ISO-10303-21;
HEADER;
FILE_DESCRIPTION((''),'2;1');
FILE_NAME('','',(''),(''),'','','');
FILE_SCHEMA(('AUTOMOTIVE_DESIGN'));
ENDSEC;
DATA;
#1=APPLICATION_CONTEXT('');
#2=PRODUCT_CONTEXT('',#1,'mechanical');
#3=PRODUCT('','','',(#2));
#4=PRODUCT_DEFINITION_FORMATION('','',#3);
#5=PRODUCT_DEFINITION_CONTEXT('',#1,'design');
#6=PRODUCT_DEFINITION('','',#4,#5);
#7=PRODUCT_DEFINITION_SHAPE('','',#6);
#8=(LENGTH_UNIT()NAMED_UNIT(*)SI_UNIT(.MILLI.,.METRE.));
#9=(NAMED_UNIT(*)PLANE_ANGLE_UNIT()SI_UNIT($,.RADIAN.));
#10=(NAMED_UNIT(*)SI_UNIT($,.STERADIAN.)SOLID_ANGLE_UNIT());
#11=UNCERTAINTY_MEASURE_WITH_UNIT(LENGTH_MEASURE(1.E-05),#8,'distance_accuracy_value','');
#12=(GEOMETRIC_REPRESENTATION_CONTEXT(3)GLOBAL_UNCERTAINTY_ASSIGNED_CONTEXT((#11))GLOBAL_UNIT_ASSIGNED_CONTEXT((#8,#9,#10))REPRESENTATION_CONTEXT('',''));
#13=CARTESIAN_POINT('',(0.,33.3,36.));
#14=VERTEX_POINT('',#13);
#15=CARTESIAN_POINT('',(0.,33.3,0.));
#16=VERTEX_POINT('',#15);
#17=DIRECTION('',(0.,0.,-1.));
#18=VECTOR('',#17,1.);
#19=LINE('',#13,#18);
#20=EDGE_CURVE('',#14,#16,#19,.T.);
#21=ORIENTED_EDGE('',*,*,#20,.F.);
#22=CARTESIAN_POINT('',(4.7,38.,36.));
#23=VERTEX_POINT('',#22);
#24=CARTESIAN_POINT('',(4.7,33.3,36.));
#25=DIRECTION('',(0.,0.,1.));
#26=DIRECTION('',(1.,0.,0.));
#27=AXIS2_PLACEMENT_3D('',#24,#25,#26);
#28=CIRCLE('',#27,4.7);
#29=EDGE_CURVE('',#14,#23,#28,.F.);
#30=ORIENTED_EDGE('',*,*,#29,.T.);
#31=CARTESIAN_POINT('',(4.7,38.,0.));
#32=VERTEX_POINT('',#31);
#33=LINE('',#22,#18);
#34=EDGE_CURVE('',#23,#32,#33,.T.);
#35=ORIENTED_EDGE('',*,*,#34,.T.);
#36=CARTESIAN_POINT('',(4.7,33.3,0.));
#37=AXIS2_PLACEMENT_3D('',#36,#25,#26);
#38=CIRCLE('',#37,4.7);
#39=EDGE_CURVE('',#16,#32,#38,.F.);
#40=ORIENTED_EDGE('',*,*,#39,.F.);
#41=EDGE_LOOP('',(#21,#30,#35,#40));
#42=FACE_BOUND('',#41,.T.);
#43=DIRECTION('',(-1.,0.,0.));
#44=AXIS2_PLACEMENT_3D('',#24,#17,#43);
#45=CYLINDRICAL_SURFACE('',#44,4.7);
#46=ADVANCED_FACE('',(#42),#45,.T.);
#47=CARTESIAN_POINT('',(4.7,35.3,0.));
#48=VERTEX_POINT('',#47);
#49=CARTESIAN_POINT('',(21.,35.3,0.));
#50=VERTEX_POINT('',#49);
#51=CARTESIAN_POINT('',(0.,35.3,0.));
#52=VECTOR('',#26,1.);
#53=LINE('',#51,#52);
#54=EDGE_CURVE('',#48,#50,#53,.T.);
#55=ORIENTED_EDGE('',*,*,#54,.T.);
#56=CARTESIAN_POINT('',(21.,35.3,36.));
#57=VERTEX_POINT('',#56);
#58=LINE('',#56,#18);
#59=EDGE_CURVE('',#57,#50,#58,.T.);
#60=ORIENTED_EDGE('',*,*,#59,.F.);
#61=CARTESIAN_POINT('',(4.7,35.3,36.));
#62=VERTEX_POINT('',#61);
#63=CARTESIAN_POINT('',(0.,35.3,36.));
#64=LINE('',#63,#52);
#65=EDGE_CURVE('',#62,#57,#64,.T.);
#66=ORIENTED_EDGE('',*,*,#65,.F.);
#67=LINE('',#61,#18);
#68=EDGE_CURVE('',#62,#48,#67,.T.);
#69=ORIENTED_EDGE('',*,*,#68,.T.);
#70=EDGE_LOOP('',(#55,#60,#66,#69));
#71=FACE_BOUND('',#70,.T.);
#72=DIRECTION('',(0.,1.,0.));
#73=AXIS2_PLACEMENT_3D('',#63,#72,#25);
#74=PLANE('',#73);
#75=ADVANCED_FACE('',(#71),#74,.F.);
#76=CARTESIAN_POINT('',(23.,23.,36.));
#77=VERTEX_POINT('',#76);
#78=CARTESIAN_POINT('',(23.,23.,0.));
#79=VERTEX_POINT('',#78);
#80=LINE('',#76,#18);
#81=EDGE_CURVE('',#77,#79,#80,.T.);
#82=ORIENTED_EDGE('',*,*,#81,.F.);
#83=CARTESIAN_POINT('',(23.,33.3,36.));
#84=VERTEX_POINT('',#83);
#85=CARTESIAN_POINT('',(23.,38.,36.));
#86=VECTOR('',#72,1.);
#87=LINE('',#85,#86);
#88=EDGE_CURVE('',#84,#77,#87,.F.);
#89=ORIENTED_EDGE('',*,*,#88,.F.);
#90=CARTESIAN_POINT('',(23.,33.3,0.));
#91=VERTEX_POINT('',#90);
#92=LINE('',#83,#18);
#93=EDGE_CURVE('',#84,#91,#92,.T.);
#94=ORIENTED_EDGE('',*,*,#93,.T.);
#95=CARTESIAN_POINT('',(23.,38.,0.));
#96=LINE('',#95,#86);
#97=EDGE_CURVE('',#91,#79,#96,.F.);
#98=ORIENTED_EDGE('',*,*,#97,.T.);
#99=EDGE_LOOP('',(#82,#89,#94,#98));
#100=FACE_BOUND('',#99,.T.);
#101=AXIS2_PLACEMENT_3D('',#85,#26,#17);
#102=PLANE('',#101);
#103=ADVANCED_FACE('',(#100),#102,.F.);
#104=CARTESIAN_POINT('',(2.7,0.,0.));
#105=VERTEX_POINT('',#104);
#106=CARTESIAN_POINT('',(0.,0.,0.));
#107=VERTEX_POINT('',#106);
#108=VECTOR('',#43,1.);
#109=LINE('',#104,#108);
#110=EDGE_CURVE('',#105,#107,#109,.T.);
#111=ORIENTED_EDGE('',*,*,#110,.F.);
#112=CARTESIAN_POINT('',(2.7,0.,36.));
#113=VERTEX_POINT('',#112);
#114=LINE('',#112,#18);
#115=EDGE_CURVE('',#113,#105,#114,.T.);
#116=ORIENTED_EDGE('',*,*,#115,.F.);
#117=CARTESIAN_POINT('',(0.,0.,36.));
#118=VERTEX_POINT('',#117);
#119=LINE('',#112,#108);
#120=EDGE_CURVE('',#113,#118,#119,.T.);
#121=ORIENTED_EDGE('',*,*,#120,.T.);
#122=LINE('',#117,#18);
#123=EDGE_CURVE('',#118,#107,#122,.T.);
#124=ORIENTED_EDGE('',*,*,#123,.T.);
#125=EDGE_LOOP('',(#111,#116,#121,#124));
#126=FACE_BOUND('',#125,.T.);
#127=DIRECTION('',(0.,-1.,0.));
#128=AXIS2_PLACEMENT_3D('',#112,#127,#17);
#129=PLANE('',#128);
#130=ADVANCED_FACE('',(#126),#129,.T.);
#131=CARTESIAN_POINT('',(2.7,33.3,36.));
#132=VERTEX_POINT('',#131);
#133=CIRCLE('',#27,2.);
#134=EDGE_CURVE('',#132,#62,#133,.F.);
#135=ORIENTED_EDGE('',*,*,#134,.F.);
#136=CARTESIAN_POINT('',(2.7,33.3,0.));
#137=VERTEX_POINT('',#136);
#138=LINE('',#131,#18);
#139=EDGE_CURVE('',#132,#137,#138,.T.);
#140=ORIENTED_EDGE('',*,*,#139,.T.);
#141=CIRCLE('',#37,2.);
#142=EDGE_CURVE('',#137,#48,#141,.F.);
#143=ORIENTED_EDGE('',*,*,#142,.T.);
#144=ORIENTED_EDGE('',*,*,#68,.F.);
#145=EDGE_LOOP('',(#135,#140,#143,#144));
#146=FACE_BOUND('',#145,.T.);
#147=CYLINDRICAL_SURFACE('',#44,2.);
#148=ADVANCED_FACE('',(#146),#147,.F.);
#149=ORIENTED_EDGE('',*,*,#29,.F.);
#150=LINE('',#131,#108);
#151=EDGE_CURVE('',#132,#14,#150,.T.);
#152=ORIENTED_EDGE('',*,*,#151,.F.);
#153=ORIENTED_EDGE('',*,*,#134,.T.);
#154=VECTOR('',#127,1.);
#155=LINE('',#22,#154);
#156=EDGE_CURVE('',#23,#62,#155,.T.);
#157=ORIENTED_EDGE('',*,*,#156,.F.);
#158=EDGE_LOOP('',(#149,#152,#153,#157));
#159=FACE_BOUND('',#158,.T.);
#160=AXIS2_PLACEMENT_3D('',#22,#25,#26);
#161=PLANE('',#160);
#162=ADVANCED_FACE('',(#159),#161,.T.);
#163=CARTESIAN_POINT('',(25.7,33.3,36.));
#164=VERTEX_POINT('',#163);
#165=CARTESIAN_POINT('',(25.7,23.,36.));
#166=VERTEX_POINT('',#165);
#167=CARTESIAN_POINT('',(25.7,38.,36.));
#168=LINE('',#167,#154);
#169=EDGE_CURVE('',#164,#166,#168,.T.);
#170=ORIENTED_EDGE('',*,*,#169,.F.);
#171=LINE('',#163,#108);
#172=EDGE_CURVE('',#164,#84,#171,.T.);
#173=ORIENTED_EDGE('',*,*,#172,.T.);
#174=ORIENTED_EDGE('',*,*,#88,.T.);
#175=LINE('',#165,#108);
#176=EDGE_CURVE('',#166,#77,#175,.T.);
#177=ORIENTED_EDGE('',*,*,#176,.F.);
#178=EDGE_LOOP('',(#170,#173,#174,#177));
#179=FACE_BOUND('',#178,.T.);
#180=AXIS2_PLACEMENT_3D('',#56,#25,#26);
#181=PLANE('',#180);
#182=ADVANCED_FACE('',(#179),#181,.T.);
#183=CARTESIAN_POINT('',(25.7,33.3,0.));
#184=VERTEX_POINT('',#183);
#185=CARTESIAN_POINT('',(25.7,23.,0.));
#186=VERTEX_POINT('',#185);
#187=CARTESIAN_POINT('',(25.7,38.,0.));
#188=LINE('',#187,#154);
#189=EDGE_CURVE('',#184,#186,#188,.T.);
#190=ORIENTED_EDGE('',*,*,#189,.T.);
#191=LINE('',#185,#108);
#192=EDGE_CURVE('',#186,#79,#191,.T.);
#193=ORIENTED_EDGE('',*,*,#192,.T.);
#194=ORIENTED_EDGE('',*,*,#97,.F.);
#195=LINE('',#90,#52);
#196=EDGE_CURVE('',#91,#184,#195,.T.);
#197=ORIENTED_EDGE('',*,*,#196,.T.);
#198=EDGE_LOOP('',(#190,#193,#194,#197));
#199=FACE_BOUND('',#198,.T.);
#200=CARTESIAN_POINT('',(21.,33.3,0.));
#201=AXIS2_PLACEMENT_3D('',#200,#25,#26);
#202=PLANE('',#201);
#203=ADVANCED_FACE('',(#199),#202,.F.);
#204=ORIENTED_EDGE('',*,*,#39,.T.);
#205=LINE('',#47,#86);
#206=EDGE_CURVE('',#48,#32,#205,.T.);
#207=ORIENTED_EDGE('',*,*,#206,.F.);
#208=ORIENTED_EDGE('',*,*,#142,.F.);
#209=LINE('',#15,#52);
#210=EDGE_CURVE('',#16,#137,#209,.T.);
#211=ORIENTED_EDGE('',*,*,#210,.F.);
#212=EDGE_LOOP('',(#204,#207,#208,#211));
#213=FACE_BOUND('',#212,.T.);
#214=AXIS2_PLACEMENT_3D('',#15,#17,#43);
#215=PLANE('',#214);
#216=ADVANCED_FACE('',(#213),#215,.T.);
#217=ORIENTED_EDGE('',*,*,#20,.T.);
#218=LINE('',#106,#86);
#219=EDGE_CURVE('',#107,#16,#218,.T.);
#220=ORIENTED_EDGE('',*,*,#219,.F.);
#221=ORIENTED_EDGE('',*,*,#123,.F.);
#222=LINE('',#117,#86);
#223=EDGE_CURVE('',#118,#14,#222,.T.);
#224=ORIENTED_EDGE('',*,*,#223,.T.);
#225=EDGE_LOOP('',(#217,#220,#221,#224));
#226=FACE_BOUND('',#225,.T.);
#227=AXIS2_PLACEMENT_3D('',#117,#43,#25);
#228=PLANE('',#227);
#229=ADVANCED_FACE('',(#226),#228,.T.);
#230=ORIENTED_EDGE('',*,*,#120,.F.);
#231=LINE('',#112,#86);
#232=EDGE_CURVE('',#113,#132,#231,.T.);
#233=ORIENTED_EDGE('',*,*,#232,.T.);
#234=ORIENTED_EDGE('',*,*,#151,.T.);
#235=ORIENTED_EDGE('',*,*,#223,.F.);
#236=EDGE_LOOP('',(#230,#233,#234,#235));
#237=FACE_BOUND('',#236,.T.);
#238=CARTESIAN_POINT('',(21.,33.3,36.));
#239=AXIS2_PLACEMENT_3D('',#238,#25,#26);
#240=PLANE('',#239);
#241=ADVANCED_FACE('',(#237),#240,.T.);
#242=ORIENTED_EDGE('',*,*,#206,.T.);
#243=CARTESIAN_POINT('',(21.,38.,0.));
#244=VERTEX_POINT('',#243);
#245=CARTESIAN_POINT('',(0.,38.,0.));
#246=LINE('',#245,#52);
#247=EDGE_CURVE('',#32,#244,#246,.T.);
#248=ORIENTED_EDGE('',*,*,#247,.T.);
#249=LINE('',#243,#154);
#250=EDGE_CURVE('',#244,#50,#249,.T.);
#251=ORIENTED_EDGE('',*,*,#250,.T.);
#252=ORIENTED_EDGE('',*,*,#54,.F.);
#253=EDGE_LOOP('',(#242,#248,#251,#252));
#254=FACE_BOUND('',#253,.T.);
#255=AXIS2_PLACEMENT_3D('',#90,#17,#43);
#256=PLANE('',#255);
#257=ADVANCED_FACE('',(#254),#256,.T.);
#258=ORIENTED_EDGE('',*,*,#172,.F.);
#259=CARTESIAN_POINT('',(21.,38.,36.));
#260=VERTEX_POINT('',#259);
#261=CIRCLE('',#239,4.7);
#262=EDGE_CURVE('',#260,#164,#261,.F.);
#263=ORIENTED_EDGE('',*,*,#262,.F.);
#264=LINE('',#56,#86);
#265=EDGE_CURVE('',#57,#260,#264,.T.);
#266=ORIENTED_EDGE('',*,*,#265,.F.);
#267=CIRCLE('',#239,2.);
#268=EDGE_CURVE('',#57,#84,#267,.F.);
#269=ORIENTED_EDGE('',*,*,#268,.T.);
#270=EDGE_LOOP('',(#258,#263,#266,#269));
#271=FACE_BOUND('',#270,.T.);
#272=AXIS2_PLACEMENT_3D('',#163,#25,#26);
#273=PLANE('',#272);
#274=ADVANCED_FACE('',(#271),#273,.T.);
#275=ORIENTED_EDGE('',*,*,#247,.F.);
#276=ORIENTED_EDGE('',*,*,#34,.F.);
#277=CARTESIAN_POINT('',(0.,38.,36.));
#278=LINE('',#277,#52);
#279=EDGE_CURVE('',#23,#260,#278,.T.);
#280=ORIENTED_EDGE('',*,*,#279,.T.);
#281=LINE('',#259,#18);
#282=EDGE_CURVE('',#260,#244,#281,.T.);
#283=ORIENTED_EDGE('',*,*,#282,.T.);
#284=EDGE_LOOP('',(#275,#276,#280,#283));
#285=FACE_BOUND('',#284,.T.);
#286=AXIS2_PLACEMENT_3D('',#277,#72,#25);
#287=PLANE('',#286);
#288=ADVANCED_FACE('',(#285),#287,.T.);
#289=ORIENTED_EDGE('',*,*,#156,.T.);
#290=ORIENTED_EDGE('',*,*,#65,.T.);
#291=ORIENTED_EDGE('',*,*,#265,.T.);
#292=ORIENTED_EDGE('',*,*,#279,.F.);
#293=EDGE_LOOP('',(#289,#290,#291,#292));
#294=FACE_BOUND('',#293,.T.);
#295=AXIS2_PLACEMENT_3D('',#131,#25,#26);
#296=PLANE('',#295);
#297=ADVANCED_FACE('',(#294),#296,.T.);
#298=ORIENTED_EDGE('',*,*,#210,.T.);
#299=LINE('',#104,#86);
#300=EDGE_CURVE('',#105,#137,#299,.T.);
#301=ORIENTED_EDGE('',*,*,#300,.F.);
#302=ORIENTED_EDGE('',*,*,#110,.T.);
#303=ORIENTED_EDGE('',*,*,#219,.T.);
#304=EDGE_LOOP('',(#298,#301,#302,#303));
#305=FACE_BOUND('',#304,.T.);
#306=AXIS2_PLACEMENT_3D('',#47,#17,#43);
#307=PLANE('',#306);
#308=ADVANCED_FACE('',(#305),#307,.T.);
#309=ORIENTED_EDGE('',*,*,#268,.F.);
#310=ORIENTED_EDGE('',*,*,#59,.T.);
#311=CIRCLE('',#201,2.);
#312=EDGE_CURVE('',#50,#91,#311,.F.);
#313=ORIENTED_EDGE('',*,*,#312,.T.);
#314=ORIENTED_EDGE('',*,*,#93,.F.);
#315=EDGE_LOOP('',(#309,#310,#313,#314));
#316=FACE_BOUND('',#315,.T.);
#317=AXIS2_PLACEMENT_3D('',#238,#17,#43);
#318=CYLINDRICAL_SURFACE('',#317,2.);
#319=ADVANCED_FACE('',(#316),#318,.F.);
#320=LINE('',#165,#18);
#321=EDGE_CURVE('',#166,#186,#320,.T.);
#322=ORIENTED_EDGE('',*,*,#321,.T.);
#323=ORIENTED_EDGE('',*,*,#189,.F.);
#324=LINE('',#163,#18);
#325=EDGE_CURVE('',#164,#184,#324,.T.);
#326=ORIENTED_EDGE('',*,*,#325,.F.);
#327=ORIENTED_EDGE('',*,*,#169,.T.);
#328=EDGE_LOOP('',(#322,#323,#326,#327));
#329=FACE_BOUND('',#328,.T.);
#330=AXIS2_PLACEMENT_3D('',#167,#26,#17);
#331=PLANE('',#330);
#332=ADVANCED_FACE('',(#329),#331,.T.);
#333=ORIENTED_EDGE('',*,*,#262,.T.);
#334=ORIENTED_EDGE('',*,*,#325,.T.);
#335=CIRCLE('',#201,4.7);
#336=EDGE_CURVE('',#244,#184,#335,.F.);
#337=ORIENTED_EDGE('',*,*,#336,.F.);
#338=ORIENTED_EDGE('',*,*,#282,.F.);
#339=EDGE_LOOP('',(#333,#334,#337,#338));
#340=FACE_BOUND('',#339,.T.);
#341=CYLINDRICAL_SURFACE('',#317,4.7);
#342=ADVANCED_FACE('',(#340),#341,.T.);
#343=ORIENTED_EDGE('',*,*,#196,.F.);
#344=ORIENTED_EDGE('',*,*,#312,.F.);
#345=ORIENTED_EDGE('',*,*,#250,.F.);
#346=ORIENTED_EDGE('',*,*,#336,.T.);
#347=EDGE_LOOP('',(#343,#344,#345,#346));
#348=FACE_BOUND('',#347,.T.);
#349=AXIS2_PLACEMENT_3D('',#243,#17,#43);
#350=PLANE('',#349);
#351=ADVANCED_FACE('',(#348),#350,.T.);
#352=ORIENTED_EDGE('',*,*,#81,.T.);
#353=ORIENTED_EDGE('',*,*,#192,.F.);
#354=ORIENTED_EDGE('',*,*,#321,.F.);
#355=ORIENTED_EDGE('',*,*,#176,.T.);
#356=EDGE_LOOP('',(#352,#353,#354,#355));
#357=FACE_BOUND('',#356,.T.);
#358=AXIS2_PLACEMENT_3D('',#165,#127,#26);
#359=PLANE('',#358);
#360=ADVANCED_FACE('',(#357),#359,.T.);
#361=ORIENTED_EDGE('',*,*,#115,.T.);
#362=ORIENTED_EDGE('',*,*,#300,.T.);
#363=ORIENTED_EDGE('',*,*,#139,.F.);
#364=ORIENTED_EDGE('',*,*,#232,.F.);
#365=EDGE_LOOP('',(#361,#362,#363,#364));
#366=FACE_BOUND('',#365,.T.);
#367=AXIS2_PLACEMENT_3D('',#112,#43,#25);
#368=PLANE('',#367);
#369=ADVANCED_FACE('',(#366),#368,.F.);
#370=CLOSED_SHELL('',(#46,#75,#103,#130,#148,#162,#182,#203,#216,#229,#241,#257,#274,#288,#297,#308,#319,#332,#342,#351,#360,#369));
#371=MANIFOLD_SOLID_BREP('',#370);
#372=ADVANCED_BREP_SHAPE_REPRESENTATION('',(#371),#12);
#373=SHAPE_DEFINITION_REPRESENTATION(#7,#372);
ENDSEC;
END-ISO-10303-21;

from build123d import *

# Parameters (mm, degrees)
BASE_FLANGE1_DEPTH = 36


# Sheet-metal steps are written as plain solids
with BuildPart() as part:
    # Sketch1 → Base-Flange1 (new body)
    with BuildSketch(Plane.XY):
        with BuildLine():
            Line((0, 0), (0, 33.3))
            ThreePointArc((0, 33.3), (1.376598128, 36.623401872), (4.7, 38))
            Line((4.7, 38), (21, 38))
            ThreePointArc((21, 38), (24.323401872, 36.623401872), (25.7, 33.3))
            Line((25.7, 33.3), (25.7, 23))
            Line((25.7, 23), (23, 23))
            Line((23, 23), (23, 33.3))
            ThreePointArc((23, 33.3), (22.414213562, 34.714213562), (21, 35.3))
            Line((21, 35.3), (4.7, 35.3))
            ThreePointArc((4.7, 35.3), (3.285786438, 34.714213562), (2.7, 33.3))
            Line((2.7, 33.3), (2.7, 0))
            Line((2.7, 0), (0, 0))
        make_face()
    extrude(amount=BASE_FLANGE1_DEPTH)


solid = part.part
